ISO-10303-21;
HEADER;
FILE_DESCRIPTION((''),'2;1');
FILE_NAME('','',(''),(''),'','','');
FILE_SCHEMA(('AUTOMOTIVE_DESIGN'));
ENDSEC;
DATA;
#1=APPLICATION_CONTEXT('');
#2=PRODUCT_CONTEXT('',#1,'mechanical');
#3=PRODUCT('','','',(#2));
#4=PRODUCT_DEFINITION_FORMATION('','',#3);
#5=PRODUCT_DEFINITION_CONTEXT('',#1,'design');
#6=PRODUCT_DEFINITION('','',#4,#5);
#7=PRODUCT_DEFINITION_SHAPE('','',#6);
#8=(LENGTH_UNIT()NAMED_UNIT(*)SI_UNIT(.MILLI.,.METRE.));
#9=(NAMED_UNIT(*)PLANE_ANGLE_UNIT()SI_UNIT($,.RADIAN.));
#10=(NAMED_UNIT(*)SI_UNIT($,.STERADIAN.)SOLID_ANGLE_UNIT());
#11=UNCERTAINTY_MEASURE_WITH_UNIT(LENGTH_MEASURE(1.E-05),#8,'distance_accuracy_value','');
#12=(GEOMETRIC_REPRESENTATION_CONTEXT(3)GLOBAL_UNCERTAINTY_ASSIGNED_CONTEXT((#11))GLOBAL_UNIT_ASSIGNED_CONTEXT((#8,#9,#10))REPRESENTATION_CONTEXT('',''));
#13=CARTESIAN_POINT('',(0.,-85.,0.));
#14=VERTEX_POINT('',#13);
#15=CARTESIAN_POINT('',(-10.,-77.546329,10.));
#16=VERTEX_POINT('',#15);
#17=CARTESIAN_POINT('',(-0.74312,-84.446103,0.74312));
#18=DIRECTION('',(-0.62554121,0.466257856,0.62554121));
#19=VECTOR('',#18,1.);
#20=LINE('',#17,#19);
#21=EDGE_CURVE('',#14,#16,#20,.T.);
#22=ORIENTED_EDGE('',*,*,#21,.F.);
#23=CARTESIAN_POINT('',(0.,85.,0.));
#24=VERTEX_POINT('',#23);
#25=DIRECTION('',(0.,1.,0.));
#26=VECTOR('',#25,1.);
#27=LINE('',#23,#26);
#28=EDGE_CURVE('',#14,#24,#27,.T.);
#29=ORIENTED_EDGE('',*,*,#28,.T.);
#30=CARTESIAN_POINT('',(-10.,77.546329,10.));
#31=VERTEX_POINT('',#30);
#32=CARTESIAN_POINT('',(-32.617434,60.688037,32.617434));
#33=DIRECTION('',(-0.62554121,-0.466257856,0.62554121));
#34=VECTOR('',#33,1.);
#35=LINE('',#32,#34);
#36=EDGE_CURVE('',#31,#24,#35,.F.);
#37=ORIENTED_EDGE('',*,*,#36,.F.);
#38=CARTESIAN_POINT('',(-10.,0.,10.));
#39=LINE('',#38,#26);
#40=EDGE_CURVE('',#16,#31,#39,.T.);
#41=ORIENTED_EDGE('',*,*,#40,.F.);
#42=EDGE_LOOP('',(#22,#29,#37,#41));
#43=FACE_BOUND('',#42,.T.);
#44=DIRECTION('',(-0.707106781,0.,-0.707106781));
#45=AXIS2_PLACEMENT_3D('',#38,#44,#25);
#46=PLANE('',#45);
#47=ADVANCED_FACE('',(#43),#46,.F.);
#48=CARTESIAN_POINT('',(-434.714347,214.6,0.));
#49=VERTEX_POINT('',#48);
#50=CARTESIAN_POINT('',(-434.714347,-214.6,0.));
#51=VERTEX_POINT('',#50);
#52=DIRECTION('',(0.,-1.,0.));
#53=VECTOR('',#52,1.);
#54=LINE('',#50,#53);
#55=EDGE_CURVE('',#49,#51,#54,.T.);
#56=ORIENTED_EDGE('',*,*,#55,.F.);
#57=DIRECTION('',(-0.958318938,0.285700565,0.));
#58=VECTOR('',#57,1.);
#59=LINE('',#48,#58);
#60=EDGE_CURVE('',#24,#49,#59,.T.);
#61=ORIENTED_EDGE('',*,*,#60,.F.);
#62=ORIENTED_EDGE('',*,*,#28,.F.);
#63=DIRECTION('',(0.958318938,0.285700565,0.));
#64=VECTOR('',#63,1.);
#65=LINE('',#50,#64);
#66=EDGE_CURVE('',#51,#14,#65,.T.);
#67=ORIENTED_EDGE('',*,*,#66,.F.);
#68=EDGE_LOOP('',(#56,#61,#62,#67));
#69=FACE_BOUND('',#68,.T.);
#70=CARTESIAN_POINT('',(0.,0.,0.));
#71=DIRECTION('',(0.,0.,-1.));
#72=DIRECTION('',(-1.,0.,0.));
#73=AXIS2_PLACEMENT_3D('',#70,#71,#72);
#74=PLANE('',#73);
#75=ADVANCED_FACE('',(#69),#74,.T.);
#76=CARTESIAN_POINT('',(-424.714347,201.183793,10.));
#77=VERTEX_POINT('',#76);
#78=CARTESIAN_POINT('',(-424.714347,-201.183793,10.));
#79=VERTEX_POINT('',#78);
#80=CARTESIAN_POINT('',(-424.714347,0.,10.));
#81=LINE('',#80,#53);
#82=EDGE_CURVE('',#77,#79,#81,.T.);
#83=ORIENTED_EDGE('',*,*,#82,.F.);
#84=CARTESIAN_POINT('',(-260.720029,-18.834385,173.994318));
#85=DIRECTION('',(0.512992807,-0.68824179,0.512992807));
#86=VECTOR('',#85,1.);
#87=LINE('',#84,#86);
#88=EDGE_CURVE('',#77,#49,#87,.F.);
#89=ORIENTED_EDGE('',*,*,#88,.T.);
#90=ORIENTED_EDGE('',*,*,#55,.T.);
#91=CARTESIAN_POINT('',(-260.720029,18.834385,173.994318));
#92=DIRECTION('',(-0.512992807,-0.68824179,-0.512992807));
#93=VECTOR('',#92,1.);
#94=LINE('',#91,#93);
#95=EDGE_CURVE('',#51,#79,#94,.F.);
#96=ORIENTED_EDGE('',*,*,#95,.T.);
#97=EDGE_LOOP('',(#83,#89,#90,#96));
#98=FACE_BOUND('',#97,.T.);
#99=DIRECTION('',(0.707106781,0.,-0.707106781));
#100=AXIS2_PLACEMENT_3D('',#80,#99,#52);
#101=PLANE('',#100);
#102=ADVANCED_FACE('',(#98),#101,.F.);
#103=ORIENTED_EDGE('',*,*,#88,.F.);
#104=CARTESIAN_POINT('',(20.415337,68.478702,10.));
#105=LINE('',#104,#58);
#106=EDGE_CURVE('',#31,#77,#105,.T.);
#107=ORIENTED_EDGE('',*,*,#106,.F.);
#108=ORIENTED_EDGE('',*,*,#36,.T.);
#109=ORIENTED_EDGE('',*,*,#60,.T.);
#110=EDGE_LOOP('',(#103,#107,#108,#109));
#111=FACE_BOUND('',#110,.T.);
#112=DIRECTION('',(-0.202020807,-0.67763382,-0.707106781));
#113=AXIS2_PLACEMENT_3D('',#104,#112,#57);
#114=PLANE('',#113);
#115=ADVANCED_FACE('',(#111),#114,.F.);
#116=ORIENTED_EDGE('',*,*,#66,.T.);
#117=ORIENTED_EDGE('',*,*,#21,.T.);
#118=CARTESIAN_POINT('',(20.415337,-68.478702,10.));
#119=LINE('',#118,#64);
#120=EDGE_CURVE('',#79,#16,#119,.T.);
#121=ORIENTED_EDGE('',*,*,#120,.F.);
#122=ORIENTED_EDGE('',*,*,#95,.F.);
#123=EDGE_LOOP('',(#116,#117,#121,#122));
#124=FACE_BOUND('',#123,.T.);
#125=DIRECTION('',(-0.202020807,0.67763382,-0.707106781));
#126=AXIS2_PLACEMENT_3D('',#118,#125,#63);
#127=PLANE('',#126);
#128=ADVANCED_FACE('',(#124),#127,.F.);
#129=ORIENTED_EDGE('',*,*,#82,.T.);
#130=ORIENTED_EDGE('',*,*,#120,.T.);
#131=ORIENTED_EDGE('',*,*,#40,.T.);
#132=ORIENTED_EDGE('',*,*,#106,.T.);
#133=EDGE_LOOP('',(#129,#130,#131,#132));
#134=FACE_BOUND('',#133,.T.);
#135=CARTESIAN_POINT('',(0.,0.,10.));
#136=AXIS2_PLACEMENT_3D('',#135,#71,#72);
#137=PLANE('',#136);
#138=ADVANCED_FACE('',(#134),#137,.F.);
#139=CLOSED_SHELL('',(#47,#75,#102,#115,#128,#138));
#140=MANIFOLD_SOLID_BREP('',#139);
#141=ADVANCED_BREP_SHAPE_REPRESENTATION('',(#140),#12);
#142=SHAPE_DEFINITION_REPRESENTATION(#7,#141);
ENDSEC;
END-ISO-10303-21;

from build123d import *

# Parameters (mm, degrees)
AUFSATZ_LINEAR_AUSTRAGEN1_DEPTH = 10
FASE1_SIZE                      = 10


with BuildPart() as part:
    # Skizze1 → Aufsatz-Linear austragen1 (new body)
    with BuildSketch(Plane.XY):
        Polygon((-434.714346895, -214.6), (-434.714346895, 214.6), (0, 85), (0, -85), align=None)
    extrude(amount=AUFSATZ_LINEAR_AUSTRAGEN1_DEPTH)

    # Fase1
    fase1_edges = [part.edges().sort_by_distance(p)[0] for p in [
        (-434.714346895, 0, 10),
        (-217.357173448, 149.8, 10),
        (0, 0, 10),
        (-217.357173448, -149.8, 10),
    ]]
    chamfer(fase1_edges, length=FASE1_SIZE - 0.0001)  # a hair under: the kernel refuses the full size


solid = part.part
